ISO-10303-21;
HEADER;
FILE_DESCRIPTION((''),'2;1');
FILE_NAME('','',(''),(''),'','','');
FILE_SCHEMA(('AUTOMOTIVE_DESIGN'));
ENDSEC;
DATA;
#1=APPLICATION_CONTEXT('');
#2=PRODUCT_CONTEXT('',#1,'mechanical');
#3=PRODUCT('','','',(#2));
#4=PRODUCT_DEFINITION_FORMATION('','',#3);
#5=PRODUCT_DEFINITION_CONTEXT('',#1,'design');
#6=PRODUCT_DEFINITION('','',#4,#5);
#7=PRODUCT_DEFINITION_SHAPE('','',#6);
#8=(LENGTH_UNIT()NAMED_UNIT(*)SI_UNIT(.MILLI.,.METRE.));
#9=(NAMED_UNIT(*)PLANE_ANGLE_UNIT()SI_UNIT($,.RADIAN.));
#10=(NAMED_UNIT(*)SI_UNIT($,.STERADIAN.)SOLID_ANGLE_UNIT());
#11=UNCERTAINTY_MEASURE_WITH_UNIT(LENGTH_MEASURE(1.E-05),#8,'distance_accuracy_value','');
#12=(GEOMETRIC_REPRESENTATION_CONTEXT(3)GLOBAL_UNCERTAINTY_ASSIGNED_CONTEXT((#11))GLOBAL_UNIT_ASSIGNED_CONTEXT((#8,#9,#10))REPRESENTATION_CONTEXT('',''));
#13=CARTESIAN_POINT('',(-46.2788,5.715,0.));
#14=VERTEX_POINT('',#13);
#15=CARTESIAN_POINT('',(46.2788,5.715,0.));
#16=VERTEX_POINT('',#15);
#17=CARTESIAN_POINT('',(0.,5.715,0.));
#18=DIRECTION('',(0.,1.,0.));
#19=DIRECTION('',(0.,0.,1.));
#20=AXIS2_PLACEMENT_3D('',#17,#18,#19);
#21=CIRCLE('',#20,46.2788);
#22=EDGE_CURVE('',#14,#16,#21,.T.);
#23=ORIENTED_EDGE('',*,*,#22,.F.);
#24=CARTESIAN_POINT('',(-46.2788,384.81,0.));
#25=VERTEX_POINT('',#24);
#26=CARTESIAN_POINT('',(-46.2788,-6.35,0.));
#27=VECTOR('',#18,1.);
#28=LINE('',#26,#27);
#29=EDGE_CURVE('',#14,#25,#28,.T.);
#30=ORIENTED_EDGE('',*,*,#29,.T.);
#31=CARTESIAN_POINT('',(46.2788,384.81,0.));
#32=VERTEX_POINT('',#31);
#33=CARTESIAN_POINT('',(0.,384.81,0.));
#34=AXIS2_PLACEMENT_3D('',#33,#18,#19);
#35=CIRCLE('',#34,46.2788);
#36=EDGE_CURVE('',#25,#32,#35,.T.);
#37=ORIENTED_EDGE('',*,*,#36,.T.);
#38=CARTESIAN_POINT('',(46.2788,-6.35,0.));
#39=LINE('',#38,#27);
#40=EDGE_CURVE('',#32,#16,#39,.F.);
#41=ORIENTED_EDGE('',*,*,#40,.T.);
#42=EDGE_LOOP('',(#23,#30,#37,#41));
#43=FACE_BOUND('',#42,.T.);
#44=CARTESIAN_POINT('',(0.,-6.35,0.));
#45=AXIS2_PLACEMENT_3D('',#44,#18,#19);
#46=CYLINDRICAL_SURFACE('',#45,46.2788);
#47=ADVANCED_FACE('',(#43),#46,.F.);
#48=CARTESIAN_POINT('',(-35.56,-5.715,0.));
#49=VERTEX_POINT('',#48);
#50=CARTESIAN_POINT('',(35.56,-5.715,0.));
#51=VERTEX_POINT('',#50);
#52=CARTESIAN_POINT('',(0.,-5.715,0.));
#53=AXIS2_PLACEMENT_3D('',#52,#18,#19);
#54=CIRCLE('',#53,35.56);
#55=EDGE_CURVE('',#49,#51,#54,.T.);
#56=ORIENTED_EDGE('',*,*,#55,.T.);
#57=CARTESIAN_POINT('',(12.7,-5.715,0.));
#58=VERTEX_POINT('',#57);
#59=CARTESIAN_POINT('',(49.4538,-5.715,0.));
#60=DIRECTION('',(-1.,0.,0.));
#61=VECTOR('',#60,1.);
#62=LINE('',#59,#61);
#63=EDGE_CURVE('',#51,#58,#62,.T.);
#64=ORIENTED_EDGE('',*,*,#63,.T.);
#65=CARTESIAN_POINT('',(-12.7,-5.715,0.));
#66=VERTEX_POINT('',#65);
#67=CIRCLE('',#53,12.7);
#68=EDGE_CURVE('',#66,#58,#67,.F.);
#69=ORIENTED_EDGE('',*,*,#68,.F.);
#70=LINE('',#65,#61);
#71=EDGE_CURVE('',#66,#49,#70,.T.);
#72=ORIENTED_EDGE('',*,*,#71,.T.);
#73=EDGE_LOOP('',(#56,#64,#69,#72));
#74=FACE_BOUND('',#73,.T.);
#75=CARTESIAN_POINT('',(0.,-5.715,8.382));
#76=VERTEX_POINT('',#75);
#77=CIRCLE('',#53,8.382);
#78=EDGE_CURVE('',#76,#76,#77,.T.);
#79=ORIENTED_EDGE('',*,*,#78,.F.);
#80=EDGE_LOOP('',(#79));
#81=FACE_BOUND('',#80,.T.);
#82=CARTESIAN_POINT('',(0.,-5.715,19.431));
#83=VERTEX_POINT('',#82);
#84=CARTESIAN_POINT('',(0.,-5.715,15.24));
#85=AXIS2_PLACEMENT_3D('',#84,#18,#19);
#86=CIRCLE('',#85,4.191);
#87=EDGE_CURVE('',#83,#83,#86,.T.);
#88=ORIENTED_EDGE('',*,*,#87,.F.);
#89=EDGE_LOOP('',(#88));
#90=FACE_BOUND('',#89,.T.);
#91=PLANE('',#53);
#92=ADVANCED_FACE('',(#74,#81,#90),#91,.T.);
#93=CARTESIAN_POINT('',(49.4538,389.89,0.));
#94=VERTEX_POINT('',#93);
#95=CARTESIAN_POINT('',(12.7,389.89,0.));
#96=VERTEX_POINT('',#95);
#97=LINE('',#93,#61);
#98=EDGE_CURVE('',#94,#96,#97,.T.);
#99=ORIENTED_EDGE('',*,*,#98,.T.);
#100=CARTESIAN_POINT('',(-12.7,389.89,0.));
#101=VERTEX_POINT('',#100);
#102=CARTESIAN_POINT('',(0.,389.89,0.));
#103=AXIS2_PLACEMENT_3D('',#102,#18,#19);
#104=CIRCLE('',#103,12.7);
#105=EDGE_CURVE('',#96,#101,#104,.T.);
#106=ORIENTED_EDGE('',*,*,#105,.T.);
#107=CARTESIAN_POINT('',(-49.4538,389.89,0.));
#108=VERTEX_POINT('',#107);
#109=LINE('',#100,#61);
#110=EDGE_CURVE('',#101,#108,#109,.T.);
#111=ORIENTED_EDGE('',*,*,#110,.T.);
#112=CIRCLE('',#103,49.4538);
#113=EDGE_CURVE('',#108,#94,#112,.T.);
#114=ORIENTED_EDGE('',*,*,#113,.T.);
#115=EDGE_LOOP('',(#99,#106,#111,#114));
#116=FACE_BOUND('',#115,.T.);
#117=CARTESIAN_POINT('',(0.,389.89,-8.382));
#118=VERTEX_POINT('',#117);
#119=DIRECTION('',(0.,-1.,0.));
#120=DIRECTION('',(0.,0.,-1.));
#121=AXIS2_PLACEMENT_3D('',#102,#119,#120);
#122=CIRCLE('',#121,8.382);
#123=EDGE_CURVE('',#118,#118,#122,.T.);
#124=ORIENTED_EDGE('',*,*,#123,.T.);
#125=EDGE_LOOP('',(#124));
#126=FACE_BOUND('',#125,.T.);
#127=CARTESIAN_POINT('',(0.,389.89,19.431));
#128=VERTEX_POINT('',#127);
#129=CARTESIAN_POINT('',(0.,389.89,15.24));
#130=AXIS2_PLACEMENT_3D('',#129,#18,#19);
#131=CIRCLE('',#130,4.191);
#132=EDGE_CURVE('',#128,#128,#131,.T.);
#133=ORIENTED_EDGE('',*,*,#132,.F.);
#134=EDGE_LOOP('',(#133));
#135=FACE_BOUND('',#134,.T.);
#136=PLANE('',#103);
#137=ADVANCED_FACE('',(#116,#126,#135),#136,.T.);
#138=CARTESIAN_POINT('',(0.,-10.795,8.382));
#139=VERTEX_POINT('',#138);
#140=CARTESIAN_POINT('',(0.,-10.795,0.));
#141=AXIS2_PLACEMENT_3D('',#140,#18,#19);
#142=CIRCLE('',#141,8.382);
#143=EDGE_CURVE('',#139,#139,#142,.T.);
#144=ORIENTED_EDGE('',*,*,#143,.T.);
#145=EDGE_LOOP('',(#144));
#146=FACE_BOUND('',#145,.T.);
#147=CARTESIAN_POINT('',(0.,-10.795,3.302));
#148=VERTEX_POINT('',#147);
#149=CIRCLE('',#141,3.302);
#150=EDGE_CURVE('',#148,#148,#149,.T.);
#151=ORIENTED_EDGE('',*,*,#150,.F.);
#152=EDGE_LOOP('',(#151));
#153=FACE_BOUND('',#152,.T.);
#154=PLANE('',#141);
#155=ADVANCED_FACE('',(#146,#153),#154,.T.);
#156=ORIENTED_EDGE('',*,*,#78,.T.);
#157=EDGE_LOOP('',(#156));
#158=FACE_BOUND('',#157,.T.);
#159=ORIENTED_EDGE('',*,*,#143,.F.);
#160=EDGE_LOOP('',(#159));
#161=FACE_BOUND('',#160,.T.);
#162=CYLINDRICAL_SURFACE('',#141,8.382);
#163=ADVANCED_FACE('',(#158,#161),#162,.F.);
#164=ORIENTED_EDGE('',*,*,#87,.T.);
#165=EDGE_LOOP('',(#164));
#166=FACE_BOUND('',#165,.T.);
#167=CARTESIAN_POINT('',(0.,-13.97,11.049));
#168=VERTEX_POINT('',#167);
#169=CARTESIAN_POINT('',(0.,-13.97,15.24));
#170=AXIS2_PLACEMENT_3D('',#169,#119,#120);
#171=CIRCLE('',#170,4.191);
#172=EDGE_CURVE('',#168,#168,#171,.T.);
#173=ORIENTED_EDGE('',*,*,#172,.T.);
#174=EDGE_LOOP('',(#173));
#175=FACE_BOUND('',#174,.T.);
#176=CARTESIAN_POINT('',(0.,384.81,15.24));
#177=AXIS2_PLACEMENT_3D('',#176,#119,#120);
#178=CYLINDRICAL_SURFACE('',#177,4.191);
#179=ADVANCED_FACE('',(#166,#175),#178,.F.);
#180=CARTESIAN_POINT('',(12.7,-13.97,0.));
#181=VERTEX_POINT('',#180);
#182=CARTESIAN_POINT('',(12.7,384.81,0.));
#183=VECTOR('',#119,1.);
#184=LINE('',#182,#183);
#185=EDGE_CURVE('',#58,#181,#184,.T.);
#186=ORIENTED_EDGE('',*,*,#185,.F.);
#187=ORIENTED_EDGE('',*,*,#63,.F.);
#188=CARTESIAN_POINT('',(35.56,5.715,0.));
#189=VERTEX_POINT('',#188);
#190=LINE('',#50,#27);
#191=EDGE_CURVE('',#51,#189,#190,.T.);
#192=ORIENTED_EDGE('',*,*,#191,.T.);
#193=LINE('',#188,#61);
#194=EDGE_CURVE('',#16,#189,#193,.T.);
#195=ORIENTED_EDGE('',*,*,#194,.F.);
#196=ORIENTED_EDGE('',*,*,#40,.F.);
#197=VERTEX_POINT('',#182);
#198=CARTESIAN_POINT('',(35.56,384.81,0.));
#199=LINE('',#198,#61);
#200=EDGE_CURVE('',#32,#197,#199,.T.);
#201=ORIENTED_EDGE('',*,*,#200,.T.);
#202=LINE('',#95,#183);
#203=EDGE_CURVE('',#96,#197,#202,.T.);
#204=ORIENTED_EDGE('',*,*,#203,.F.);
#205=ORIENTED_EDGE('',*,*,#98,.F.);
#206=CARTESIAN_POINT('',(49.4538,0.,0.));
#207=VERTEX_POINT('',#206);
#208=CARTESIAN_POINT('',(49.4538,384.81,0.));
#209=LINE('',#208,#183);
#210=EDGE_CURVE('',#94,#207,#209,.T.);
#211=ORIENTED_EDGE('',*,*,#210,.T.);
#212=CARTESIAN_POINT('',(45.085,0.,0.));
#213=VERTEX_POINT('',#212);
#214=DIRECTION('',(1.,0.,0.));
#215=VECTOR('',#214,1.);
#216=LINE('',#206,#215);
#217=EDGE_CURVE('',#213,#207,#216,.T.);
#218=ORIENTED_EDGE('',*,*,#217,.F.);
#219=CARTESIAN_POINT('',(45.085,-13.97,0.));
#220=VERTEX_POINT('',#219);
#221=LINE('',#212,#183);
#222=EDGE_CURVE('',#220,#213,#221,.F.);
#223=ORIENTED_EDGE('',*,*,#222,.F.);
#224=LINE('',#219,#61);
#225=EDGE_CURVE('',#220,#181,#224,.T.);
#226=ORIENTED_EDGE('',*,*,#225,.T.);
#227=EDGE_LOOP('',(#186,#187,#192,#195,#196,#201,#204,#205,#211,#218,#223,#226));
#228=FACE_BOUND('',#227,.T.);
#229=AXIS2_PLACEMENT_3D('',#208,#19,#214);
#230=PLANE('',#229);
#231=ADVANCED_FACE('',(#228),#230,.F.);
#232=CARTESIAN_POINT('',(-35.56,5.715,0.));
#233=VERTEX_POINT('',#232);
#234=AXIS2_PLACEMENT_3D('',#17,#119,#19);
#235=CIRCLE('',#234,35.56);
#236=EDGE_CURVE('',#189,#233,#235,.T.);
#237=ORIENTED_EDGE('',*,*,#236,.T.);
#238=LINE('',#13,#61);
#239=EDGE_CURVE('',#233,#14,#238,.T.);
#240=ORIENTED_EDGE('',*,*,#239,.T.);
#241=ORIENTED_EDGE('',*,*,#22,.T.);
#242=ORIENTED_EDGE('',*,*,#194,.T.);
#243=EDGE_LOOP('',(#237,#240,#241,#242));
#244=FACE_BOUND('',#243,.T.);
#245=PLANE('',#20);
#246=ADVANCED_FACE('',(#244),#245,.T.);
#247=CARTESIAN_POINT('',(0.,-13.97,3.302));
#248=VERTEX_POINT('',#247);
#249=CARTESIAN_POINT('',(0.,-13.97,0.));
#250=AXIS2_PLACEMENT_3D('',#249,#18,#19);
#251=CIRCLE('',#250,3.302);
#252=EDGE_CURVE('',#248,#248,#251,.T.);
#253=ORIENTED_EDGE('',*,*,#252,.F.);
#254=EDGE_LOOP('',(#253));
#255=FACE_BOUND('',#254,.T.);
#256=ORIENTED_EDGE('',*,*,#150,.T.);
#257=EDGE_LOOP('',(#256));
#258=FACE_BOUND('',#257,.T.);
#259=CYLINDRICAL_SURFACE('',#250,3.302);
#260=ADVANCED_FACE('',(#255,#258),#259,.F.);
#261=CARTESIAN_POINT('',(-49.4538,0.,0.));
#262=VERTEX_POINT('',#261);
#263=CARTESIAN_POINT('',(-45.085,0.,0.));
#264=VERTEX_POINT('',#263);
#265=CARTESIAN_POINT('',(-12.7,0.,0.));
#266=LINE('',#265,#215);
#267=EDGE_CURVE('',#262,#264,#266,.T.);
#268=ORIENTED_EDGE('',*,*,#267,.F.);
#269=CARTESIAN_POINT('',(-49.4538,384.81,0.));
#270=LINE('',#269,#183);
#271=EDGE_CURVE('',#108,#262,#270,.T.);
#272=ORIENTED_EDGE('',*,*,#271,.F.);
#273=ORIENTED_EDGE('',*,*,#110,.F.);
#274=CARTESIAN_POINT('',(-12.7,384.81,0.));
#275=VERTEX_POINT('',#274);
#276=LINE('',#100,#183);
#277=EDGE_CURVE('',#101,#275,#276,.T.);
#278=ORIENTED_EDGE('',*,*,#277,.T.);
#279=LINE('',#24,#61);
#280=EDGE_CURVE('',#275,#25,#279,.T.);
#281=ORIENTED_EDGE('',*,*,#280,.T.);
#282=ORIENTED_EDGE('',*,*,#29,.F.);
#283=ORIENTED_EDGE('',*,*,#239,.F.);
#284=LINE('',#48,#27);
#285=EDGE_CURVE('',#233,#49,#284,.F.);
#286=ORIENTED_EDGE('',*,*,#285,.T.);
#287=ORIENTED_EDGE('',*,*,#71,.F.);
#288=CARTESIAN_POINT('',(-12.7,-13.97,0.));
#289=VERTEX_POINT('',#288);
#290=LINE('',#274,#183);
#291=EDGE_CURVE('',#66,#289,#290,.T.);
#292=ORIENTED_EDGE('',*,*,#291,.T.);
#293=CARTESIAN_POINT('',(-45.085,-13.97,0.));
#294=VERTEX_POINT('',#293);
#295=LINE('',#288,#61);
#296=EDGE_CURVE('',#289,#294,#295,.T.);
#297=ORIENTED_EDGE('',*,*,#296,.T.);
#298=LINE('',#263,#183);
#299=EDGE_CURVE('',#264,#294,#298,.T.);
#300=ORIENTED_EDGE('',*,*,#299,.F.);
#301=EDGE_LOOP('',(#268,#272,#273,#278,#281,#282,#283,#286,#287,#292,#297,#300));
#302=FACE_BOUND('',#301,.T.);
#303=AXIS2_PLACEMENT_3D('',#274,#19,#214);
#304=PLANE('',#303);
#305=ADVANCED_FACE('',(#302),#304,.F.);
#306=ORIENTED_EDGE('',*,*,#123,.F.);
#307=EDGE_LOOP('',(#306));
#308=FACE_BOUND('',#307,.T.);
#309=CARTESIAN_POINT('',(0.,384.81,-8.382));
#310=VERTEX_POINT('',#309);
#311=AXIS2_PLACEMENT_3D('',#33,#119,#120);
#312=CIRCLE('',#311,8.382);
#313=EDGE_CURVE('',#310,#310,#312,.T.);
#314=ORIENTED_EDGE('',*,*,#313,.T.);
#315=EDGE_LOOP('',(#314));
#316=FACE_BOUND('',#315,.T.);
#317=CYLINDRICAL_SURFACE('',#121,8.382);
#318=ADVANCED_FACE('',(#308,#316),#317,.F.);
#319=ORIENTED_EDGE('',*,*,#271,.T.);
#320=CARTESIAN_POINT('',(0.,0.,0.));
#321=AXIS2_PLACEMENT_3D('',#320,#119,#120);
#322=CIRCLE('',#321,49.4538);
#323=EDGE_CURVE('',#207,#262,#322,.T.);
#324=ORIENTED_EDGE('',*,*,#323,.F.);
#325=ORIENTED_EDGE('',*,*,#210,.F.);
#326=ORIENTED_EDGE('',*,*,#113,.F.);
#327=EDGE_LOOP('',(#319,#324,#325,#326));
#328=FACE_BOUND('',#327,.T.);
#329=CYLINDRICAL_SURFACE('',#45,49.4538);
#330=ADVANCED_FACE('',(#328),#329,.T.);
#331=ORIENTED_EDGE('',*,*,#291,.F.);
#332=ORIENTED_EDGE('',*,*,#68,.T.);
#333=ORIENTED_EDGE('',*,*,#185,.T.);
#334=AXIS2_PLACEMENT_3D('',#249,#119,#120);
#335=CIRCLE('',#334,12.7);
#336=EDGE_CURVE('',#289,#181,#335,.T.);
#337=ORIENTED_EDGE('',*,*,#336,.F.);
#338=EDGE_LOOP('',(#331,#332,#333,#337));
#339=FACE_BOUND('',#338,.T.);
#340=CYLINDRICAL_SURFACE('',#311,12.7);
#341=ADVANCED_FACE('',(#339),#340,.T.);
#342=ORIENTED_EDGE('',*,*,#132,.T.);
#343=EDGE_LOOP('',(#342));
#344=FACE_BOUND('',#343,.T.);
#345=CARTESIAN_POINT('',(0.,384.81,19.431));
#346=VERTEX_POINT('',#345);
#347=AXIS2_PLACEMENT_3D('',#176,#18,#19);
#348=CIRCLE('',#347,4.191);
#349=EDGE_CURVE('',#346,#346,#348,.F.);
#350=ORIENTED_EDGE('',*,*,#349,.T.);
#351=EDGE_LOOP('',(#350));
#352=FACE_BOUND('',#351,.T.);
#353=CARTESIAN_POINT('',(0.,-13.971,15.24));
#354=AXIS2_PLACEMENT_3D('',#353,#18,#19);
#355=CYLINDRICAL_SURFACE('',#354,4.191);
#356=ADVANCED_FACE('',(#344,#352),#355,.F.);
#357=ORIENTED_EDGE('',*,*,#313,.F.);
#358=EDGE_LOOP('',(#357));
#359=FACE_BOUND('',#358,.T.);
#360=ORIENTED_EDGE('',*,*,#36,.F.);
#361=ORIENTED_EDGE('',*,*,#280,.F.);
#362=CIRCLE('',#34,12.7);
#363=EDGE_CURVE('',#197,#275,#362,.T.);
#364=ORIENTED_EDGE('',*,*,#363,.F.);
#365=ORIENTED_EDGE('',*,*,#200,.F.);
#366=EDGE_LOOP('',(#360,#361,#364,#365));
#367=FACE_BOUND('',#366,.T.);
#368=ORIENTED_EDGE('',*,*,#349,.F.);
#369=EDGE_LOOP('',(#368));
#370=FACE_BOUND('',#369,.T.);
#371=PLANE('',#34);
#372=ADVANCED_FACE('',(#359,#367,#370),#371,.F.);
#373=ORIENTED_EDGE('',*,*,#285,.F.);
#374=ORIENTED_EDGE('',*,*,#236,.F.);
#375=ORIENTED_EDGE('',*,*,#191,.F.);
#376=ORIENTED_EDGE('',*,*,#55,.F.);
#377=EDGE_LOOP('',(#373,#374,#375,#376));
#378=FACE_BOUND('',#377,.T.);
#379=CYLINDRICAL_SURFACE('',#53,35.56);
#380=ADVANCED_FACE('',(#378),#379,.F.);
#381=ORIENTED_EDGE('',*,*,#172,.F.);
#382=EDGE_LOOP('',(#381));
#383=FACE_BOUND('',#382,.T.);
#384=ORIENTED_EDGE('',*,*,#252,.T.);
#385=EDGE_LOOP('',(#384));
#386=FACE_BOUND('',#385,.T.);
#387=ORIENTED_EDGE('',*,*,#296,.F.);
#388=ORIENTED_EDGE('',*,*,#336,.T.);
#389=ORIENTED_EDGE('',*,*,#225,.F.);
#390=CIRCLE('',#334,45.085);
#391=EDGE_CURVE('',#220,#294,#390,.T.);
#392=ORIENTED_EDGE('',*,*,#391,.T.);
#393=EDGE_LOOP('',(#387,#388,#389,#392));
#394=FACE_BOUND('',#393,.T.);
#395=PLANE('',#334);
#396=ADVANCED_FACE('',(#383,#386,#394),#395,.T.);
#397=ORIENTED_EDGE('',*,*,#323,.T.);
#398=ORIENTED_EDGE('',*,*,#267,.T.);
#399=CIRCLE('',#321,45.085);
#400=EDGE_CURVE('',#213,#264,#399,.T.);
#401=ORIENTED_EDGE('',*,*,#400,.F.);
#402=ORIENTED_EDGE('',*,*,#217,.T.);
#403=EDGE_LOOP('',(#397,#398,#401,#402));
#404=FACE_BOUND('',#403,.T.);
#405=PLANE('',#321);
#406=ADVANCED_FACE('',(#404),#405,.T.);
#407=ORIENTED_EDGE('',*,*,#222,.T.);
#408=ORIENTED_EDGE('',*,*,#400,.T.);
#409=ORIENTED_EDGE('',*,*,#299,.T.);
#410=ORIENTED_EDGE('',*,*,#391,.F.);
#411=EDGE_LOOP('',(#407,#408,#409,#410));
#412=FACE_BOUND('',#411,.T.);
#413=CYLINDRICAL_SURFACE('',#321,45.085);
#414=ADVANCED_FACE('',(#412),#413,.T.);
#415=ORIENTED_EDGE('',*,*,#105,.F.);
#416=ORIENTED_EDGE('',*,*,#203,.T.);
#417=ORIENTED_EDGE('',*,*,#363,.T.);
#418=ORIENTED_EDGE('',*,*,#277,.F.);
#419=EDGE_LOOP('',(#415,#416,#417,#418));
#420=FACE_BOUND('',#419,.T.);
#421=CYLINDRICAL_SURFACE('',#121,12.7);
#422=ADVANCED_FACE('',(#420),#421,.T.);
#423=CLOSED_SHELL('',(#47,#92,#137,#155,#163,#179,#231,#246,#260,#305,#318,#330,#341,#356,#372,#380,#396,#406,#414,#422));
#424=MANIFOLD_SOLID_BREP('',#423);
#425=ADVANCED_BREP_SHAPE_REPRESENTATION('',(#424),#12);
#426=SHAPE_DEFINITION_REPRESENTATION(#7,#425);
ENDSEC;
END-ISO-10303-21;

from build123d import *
from build123d.topology import SkipClean

# Parameters (mm, degrees)
BOSS_EXTRUDE1_DEPTH      = 3.81
BOSS_EXTRUDE1_DEPTH_BACK = 6.35
SKETCH1_R                = 49.4538
SKETCH2_R                = 49.4538
BOSS_EXTRUDE2_DEPTH      = 381
SHELL1_T                 = -3.175
CUT_EXTRUDE1_DEPTH       = 398.363186857
BOSS_EXTRUDE3_DEPTH      = 3.81
SKETCH7_R                = 49.4538
SKETCH7_R_2              = 45.085
CUT_EXTRUDE2_DEPTH       = 6.35
BOSS_EXTRUDE4_START      = 7.62
BOSS_EXTRUDE4_DEPTH      = 7.62
SKETCH10_R               = 35.56
CUT_EXTRUDE3_DEPTH       = 6.35
SKETCH11_R               = 8.382
CUT_EXTRUDE4_DEPTH       = 5.08
SKETCH12_R               = 3.302
CUT_EXTRUDE5_DEPTH       = 402.739558289
BOSS_EXTRUDE5_DEPTH      = 5.08
SKETCH14_R               = 4.191
CUT_EXTRUDE6_DEPTH       = 405.866453376
BOSS_EXTRUDE6_DEPTH      = 5.08
SKETCH16_R               = 8.382
CUT_EXTRUDE7_DEPTH       = 405.866453376
CUT_EXTRUDE8_REACH       = 411.871
SKETCH17_R               = 4.191


with BuildPart() as part:
    # Sketch1 → Boss-Extrude1 (new, two sides: drawn at the far end of the back side and taken through both)
    with BuildSketch(Plane(origin=(0, 0, 0), x_dir=(1, 0, 0), z_dir=(0, 1, 0)).offset(-BOSS_EXTRUDE1_DEPTH_BACK)):
        Circle(SKETCH1_R)
    extrude(amount=BOSS_EXTRUDE1_DEPTH + BOSS_EXTRUDE1_DEPTH_BACK)

    # Sketch2 → Boss-Extrude2 (add)
    with BuildSketch(Plane(origin=(0, 3.81, 0), x_dir=(1, 0, 0), z_dir=(0, 1, 0))):
        Circle(SKETCH2_R)
    extrude(amount=BOSS_EXTRUDE2_DEPTH)

    # Shell1
    shell1_openings = [part.faces().sort_by_distance(p)[0] for p in [
        (0, 384.81, 0),
    ]]
    offset(amount=SHELL1_T, openings=shell1_openings, kind=Kind.INTERSECTION)

    # Sketch4 → Cut-Extrude1 (cut, through all)
    with BuildSketch(Plane.XZ.offset(6.35)):
        with BuildLine():
            Line((49.4538, 0), (12.7, 0))
            ThreePointArc((12.7, 0), (0, -12.7), (-12.7, 0))
            Line((-12.7, 0), (-49.4538, 0))
            ThreePointArc((-49.4538, 0), (0, -49.4538), (49.4538, 0))
        make_face()
    extrude(amount=-CUT_EXTRUDE1_DEPTH, mode=Mode.SUBTRACT)

    # Sketch5 → Boss-Extrude3 (add)
    with BuildSketch(Plane(origin=(0, -3.175, 0), x_dir=(1, 0, 0), z_dir=(0, 1, 0))):
        with BuildLine():
            Line((-46.2788, 0), (-12.7, 0))
            ThreePointArc((-12.7, 0), (0, 12.7), (12.7, 0))
            Line((12.7, 0), (46.2788, 0))
            ThreePointArc((46.2788, 0), (0, -46.2788), (-46.2788, 0))
        make_face()
    extrude(amount=BOSS_EXTRUDE3_DEPTH)

    # Sketch7 → Cut-Extrude2 (cut)
    with BuildSketch(Plane.XZ.offset(6.35)):
        Circle(SKETCH7_R)
        Circle(SKETCH7_R_2, mode=Mode.SUBTRACT)
    extrude(amount=-CUT_EXTRUDE2_DEPTH, mode=Mode.SUBTRACT)

    # Sketch9 → Boss-Extrude4 (add)
    with SkipClean():  # the faces are left unmerged after this step: merging them gives an invalid solid
        with BuildSketch(Plane.XZ.offset(6.35).offset(BOSS_EXTRUDE4_START)):
            with BuildLine():
                Line((45.085, 0), (12.7, 0))
                ThreePointArc((12.7, 0), (0, -12.7), (-12.7, 0))
                Line((-12.7, 0), (-45.085, 0))
                ThreePointArc((-45.085, 0), (0, 45.085), (45.085, 0))
            make_face()
        extrude(amount=-BOSS_EXTRUDE4_DEPTH)
    add(part.part.scale(1), mode=Mode.REPLACE)  # the faces are merged on a copy

    # Sketch10 → Cut-Extrude3 (cut)
    with BuildSketch(Plane(origin=(0, 0.635, 0), x_dir=(1, 0, 0), z_dir=(0, 1, 0))):
        Circle(SKETCH10_R)
    extrude(amount=-CUT_EXTRUDE3_DEPTH, mode=Mode.SUBTRACT)

    # Sketch11 → Cut-Extrude4 (cut)
    with BuildSketch(Plane(origin=(0, -5.715, 0), x_dir=(1, 0, 0), z_dir=(0, 1, 0))):
        Circle(SKETCH11_R)
    extrude(amount=-CUT_EXTRUDE4_DEPTH, mode=Mode.SUBTRACT)

    # Sketch12 → Cut-Extrude5 (cut, through all)
    with BuildSketch(Plane(origin=(0, -10.795, 0), x_dir=(1, 0, 0), z_dir=(0, 1, 0))):
        Circle(SKETCH12_R)
    extrude(amount=-CUT_EXTRUDE5_DEPTH, mode=Mode.SUBTRACT)

    # Sketch13 → Boss-Extrude5 (add)
    with SkipClean():  # the faces are left unmerged after this step: merging them gives an invalid solid
        with BuildSketch(Plane(origin=(0, 0.635, 0), x_dir=(1, 0, 0), z_dir=(0, 1, 0))):
            with BuildLine():
                Line((-46.2788, 0), (-35.56, 0))
                ThreePointArc((-35.56, 0), (0, -35.56), (35.56, 0))
                Line((35.56, 0), (46.2788, 0))
                ThreePointArc((46.2788, 0), (0, -46.2788), (-46.2788, 0))
            make_face()
        extrude(amount=BOSS_EXTRUDE5_DEPTH)
    add(part.part.scale(1), mode=Mode.REPLACE)  # the faces are merged on a copy

    # Sketch14 → Cut-Extrude6 (cut, through all)
    with BuildSketch(Plane.XZ.offset(13.97)):
        with Locations((0, 15.24)):
            Circle(SKETCH14_R)
    extrude(amount=-CUT_EXTRUDE6_DEPTH, mode=Mode.SUBTRACT)

    # Sketch15 → Boss-Extrude6 (add)
    with SkipClean():  # the faces are left unmerged after this step: merging them gives an invalid solid
        with BuildSketch(Plane(origin=(0, 384.81, 0), x_dir=(1, 0, 0), z_dir=(0, 1, 0))):
            with BuildLine():
                Line((46.2788, 0), (35.56, 0))
                Line((35.56, 0), (12.7, 0))
                ThreePointArc((12.7, 0), (0, 12.7), (-12.7, 0))
                Line((-12.7, 0), (-35.56, 0))
                Line((-35.56, 0), (-46.2788, 0))
                Line((-46.2788, 0), (-49.4538, 0))
                ThreePointArc((-49.4538, 0), (0, -49.4538), (49.4538, 0))
                Line((49.4538, 0), (46.2788, 0))
            make_face()
        extrude(amount=BOSS_EXTRUDE6_DEPTH)

    # Sketch16 → Cut-Extrude7 (cut, through all)
    with SkipClean():  # the faces are left unmerged after this step: merging them gives an invalid solid
        with BuildSketch(Plane.XZ.offset(-384.81)):
            Circle(SKETCH16_R)
        extrude(amount=-CUT_EXTRUDE7_DEPTH, mode=Mode.SUBTRACT)

    # Sketch17 → Cut-Extrude8 (cut, up to next)
    with BuildSketch(Plane(origin=(0, 389.89, 0), x_dir=(1, 0, 0), z_dir=(0, 1, 0)), mode=Mode.PRIVATE) as cut_extrude8_sk1:
        with Locations((0, -15.24)):
            Circle(SKETCH17_R)
    cut_extrude8_tool1 = extrude(cut_extrude8_sk1.sketch, amount=-CUT_EXTRUDE8_REACH, mode=Mode.PRIVATE) & part.part
    add(cut_extrude8_tool1.solids().sort_by_distance((0, 389.89, 15.24))[0], mode=Mode.SUBTRACT)


solid = part.part
